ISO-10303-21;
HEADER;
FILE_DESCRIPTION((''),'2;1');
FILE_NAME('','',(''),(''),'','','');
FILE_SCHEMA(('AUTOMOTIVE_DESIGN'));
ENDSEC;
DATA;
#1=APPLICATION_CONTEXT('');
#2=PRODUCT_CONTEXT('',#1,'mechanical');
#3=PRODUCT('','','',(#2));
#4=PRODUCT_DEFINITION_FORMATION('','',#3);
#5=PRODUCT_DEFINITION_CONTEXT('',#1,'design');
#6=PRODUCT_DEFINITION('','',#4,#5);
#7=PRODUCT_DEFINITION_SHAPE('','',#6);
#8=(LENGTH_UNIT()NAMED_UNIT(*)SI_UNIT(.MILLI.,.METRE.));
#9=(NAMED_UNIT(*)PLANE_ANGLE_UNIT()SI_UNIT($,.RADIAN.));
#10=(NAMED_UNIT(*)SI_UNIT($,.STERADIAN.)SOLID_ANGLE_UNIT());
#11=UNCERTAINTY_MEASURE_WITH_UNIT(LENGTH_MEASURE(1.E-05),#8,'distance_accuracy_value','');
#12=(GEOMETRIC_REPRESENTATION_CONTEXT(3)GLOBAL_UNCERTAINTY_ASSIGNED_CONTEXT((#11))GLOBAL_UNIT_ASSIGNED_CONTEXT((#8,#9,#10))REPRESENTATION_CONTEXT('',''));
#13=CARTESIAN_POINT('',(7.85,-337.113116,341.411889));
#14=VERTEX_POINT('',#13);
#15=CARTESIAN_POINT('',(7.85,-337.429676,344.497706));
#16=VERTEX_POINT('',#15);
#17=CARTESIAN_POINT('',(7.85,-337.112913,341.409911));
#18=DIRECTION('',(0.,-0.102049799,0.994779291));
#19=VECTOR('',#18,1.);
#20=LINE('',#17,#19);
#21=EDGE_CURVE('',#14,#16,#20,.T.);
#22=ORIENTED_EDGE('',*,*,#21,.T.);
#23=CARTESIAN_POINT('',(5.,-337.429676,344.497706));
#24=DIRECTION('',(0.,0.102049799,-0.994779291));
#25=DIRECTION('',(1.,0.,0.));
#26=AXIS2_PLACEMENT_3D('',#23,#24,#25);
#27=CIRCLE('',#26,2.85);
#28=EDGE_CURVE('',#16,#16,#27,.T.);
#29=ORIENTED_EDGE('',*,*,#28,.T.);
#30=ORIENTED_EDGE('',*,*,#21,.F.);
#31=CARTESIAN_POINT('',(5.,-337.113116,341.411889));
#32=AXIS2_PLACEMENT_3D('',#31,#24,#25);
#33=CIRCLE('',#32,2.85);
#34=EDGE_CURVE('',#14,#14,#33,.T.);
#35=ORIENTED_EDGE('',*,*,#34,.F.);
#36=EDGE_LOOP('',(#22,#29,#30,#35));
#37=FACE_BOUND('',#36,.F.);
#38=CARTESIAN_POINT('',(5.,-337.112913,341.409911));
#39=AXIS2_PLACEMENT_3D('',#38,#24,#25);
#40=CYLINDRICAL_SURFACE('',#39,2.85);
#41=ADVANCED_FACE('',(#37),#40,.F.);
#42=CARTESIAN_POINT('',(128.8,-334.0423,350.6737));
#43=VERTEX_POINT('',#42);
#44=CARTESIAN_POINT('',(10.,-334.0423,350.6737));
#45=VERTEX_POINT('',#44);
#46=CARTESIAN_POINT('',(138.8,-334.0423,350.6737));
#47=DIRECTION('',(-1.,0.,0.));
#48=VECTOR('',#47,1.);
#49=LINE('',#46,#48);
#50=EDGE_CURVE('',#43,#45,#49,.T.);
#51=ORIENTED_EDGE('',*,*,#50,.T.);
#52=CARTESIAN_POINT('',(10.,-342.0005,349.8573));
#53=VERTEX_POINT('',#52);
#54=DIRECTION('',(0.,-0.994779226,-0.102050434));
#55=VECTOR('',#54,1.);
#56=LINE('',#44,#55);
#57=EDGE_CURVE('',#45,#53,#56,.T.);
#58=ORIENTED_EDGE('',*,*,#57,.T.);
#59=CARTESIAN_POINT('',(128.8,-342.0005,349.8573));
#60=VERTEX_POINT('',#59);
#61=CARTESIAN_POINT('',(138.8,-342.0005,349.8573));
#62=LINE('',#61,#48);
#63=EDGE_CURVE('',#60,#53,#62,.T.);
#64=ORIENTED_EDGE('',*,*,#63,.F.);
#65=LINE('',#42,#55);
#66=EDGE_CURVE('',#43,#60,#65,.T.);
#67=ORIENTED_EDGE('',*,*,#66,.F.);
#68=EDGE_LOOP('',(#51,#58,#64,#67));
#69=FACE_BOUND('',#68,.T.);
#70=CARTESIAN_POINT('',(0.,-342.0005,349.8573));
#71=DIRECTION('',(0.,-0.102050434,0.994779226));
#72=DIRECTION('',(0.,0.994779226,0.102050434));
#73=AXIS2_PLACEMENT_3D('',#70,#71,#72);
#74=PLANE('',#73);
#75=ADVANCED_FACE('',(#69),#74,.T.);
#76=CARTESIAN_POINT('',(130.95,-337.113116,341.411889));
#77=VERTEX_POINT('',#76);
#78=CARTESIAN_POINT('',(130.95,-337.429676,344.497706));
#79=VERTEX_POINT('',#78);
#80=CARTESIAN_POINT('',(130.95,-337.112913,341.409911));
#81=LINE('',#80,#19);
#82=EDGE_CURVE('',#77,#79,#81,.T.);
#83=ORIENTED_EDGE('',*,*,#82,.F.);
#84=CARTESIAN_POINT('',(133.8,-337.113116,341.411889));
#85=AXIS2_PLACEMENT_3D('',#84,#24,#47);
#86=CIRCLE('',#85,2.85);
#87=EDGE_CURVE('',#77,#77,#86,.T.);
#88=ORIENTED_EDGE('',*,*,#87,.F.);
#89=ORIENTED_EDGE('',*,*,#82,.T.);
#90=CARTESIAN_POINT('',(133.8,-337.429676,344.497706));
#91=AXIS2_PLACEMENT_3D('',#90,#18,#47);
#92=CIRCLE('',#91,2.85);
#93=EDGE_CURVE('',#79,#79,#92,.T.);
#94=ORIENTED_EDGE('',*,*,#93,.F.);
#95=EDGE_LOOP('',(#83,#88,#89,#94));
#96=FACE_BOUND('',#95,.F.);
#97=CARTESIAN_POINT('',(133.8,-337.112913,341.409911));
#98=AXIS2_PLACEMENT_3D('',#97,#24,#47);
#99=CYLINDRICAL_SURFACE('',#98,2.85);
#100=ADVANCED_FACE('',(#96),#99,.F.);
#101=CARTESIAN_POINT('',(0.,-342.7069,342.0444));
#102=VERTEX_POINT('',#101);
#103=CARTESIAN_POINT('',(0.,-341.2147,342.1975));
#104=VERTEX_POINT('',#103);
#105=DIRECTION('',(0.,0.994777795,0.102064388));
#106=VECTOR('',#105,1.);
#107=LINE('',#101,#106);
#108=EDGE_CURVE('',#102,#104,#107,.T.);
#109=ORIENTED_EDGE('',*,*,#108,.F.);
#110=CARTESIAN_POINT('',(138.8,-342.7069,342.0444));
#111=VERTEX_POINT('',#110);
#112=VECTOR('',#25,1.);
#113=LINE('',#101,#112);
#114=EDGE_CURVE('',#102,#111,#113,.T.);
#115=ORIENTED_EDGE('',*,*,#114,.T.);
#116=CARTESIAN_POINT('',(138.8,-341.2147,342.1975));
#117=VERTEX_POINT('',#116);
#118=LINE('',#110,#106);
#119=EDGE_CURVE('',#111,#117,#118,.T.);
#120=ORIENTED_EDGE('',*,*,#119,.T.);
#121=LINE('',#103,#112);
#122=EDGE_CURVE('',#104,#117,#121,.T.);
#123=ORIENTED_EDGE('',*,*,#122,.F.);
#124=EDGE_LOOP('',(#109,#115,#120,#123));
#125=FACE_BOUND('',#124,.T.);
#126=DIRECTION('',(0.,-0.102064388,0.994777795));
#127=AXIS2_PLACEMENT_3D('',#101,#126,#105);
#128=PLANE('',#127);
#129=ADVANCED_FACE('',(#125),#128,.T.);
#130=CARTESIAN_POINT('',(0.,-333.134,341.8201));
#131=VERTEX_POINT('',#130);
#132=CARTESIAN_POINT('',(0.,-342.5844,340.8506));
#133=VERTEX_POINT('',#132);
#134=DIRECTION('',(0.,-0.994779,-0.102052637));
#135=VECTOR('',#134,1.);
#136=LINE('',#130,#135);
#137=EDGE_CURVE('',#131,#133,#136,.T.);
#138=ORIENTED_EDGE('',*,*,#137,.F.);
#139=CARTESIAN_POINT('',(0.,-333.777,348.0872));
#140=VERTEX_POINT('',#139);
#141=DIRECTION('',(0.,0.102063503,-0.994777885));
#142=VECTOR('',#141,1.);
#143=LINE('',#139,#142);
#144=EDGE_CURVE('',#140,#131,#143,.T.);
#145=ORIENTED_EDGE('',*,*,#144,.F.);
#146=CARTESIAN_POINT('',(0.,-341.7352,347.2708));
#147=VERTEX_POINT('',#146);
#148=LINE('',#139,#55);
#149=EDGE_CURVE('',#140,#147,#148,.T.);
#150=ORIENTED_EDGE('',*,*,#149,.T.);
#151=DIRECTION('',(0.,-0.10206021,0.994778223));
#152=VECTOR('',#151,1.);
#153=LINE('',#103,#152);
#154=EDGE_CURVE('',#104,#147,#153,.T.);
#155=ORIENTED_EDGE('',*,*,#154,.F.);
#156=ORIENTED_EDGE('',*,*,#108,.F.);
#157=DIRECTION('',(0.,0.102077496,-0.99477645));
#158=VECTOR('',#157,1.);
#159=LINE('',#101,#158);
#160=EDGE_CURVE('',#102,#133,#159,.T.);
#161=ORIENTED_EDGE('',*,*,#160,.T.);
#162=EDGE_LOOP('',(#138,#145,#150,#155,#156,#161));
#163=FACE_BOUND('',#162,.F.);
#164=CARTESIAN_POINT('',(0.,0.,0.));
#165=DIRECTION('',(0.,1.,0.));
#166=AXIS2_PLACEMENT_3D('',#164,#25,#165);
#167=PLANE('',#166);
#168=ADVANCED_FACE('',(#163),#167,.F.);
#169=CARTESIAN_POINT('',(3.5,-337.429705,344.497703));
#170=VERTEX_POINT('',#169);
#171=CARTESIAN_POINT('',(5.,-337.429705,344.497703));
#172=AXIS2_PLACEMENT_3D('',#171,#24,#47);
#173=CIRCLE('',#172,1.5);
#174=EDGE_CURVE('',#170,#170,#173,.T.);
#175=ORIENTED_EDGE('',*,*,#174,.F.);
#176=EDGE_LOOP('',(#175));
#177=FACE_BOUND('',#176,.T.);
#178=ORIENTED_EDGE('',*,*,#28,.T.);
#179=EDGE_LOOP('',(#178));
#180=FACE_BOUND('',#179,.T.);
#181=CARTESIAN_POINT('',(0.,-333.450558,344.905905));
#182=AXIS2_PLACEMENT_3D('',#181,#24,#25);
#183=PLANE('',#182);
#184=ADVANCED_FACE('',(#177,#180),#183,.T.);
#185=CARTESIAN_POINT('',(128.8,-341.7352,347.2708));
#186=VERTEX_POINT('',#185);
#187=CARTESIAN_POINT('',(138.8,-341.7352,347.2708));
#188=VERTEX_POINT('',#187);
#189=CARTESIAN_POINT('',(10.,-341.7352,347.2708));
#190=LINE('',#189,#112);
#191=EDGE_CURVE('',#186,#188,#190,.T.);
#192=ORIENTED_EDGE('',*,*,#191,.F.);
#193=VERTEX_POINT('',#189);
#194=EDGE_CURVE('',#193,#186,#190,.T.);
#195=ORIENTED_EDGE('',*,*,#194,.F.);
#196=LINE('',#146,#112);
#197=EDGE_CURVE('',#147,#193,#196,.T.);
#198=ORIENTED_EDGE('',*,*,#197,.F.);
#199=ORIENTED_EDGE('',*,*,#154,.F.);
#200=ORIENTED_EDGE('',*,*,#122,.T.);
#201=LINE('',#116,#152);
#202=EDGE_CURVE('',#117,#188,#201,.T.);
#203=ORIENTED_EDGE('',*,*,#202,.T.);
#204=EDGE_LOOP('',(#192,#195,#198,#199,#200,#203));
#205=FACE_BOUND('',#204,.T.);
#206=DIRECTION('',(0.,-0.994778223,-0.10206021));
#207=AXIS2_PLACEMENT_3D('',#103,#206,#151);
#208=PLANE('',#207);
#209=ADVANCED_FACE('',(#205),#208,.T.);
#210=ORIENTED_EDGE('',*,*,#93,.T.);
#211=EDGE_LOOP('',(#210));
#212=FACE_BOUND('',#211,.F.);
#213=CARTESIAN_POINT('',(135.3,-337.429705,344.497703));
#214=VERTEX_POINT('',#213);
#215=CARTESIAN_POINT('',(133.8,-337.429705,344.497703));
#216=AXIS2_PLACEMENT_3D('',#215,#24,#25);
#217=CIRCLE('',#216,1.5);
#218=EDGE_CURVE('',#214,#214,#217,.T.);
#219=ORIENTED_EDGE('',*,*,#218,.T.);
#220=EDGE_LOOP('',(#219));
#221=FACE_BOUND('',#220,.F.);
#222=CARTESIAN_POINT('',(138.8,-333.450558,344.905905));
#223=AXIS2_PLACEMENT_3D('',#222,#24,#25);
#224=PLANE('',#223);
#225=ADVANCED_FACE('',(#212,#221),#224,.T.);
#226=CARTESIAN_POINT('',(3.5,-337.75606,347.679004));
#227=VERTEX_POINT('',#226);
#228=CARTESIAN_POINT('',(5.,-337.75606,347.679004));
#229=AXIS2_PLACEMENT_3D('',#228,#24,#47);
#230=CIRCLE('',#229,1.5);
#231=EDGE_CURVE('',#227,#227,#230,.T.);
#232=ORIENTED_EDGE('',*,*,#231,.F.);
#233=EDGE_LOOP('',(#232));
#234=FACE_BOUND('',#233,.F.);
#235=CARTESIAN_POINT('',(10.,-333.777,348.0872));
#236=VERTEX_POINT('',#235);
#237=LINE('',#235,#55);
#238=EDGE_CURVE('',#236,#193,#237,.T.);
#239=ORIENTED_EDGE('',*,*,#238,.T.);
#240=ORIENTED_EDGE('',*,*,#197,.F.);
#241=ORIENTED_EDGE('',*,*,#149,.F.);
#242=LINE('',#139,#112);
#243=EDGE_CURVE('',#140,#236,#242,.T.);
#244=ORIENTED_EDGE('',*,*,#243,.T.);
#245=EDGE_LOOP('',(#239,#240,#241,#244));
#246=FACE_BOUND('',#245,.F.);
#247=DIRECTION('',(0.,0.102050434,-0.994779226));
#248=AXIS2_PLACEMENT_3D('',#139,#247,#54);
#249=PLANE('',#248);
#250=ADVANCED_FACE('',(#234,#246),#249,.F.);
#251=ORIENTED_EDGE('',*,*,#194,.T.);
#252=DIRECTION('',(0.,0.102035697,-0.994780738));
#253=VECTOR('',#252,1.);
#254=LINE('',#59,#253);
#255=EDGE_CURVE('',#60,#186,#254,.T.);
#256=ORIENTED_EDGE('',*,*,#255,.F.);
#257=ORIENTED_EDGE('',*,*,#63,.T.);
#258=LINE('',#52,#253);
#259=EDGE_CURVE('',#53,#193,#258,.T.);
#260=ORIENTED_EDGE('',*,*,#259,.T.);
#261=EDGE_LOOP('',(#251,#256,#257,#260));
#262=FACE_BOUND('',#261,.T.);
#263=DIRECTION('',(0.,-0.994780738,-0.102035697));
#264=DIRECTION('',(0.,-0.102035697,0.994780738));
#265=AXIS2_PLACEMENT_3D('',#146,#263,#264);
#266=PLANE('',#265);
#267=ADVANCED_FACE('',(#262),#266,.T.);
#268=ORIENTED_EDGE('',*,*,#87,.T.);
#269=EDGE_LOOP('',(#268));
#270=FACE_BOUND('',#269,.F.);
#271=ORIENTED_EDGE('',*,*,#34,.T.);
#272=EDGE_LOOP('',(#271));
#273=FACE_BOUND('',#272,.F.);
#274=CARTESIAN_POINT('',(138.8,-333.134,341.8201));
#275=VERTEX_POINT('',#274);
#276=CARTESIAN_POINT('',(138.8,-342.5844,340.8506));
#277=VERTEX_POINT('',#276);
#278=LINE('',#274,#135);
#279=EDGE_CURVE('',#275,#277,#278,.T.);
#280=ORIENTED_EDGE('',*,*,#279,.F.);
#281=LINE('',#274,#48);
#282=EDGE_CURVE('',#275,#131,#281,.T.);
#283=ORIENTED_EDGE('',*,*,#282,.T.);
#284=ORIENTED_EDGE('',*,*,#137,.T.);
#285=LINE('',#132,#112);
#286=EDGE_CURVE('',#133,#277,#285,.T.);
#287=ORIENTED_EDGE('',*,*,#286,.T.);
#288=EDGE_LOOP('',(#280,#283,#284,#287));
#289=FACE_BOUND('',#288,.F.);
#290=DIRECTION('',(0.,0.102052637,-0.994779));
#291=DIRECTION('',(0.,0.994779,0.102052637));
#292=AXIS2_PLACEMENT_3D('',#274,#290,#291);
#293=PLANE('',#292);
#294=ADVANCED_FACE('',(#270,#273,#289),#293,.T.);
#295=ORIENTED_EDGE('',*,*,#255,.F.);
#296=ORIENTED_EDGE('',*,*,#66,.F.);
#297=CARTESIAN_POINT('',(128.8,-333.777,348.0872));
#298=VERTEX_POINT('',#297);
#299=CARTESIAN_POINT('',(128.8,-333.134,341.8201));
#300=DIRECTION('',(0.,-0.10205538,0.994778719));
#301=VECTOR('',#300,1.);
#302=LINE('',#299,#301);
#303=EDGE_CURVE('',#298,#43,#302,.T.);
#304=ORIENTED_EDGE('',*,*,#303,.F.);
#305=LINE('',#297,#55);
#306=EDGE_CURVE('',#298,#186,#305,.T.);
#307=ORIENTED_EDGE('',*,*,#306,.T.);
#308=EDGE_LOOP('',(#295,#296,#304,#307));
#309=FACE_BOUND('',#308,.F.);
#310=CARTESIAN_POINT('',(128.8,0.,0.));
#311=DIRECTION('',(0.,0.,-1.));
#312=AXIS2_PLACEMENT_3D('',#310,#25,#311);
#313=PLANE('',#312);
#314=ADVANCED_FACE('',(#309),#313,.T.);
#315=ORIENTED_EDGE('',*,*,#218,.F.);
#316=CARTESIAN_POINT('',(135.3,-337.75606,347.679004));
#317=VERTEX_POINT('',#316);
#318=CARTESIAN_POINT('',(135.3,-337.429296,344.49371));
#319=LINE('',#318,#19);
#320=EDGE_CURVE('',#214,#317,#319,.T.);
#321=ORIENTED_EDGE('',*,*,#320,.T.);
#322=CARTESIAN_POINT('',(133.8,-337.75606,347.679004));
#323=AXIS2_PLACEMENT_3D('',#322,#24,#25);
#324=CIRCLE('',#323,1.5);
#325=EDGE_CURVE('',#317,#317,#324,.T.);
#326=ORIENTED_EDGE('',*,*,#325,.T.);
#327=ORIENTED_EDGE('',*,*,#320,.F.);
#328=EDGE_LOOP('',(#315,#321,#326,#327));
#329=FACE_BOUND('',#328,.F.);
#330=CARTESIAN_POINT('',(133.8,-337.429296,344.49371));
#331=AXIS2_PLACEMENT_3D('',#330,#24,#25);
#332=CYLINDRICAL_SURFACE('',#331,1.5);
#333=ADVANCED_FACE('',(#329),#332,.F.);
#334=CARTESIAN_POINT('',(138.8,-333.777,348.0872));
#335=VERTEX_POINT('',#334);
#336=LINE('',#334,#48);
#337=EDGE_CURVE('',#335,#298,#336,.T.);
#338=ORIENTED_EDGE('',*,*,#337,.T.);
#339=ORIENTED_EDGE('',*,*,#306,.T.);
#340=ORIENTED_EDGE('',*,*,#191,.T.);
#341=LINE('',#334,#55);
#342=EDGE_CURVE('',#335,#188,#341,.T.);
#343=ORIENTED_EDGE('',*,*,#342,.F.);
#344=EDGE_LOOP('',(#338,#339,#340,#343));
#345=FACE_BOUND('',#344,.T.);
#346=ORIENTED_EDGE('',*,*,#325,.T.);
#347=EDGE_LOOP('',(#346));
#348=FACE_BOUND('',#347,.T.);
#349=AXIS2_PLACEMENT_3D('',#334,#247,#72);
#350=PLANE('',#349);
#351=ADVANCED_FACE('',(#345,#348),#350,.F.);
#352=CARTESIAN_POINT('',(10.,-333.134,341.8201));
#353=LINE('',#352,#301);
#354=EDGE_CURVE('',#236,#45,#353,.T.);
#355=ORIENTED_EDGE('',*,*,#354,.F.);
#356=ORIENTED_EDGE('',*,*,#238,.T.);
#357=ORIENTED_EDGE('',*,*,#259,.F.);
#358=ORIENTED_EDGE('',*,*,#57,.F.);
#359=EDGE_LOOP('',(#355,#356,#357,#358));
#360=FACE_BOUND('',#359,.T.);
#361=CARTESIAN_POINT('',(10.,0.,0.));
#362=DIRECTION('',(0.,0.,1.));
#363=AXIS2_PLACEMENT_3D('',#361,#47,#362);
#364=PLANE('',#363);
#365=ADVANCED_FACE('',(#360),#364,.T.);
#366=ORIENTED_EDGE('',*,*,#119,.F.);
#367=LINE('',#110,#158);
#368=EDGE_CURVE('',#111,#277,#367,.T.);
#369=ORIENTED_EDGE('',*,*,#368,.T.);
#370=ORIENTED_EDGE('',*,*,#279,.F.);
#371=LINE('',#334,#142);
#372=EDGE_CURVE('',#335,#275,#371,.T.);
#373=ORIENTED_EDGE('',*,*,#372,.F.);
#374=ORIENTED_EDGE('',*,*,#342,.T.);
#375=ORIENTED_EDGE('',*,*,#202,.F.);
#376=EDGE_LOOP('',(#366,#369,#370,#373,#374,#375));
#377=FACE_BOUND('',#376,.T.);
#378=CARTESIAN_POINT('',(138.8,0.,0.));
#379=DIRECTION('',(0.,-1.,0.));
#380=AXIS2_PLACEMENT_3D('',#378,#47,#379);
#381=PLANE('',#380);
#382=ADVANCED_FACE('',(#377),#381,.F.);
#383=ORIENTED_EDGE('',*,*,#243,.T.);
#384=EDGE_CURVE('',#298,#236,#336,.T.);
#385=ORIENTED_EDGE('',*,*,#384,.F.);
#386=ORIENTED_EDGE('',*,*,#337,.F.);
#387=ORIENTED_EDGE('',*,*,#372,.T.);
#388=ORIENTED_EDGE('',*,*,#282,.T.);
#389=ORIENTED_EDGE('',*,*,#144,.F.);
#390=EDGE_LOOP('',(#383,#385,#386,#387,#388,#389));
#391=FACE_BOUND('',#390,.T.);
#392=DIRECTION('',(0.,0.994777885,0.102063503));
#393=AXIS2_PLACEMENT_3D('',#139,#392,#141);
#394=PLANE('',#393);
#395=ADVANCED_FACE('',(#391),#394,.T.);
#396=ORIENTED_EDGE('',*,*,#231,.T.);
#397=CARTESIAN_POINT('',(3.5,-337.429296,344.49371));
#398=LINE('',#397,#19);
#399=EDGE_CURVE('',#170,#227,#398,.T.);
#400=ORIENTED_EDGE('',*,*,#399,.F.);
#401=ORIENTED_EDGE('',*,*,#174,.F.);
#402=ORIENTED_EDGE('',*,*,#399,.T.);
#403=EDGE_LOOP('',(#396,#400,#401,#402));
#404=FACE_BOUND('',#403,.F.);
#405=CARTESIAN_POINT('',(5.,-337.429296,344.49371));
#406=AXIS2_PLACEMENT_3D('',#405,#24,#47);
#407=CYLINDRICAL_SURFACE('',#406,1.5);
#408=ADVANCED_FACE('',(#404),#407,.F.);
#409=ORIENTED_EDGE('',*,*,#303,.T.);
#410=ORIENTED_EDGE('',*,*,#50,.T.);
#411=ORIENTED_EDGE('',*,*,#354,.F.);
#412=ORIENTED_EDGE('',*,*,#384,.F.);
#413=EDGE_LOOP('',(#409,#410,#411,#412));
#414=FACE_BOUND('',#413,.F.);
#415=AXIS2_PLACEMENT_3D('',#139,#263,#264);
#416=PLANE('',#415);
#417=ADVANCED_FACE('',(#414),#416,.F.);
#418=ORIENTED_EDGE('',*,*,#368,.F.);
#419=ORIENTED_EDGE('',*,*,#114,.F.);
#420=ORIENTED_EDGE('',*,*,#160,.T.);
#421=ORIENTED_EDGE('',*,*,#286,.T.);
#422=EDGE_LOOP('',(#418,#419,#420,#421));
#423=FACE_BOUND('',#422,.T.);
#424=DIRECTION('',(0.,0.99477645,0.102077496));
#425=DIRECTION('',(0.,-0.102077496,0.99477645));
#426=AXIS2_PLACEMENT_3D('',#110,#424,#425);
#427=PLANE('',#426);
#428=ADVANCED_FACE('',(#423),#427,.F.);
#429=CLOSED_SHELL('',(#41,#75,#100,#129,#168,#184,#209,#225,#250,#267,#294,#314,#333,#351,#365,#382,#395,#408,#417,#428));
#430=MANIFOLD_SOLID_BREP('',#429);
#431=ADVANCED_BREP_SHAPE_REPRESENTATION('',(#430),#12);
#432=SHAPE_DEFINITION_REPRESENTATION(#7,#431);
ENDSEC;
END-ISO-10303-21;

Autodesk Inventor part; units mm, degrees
ref_plane "YZ Plane" through (0, 0, 0) normal (1, 0, 0) x (0, 1, 0)
ref_plane "XZ Plane" through (0, 0, 0) normal (0, 1, 0) x (-1, 0, 0)
ref_plane "XY Plane" through (0, 0, 0) normal (0, 0, 1) x (1, 0, 0)
sketch "Skizze2" plane through (0, 0, 0) normal (1, 0, 0) x (0, 1, 0)
  line L0 (-333.777, 348.0872) -> (-334.0423, 350.6737)
  line L1 (-333.777, 348.0872) -> (-333.134, 341.8201)
  line L2 (-333.134, 341.8201) -> (-342.5844, 340.8506)
  line L3 (-342.0005, 349.8573) -> (-334.0423, 350.6737)
  line L4 (-342.7069, 342.0444) -> (-341.2147, 342.1975)
  line L5 (-342.7069, 342.0444) -> (-342.5844, 340.8506)
  line L6 (-333.134, 341.8201) -> (-342.5844, 340.8506)
  line L7 (-333.777, 348.0872) -> (-333.134, 341.8201)
  line L8 (-333.777, 348.0872) -> (-341.7352, 347.2708)
  line L9 (-341.2147, 342.1975) -> (-341.7352, 347.2708)
  line L10 (-342.7069, 342.0444) -> (-342.5844, 340.8506)
  line L11 (-341.7352, 347.2708) -> (-342.0005, 349.8573)
  point P0 (0, 0)
extrude "Extrusion1" add sketch "Skizze2" along normal blind 69.4
sketch "Skizze3" plane through (0, 0, 0) normal (-1, 0, 0) x (0, 0, 1)
  line L0 (342.0444, -342.7069) -> (342.1975, -341.2147) projected
  line L1 (342.0444, -342.7069) -> (340.8506, -342.5844) projected
  line L2 (341.8201, -333.134) -> (340.8506, -342.5844) projected
  line L3 (348.0872, -333.777) -> (341.8201, -333.134) projected
  line L4 (348.0872, -333.777) -> (347.2708, -341.7352) projected
  line L5 (342.1975, -341.2147) -> (347.2708, -341.7352) projected
  line L6 (350.6737, -334.0423) -> (349.8573, -342.0005) projected
  line L7 (349.8573, -342.0005) -> (347.2708, -341.7352)
  line L8 (349.8573, -342.0005) -> (342.1975, -341.2147) projected
  line L9 (341.8201, -333.134) -> (350.6737, -334.0423) projected
  line L10 (350.6737, -334.0423) -> (348.0872, -333.777)
  point P0 (0, 0)
extrude "Extrusion2" cut sketch "Skizze3" against normal blind 10 contours L4 L9 L6 L7
sketch "Skizze4" plane through (0, -333.134, 341.8201) normal (0, 0.1020498, -0.9947793) x (1, 0, 0)
  line L0 (5, 0) -> (5, 9.5) construction
  line L1 (0, 9.5) -> (69.4, 9.5) construction
  circle A0 centre (5, 4) radius 2.85
  circle A1 centre (5, 4) radius 1.5 construction
  point P0 (0, -296.5122)
  dimension "d4" = 5.7
extrude "Extrusion3" cut sketch "Skizze4" against normal blind 3.1
sketch "Skizze5" plane through (5, -337.4295, 344.4957) normal (0, 0.1020498, -0.9947793) x (-1, 0, 0)
  circle A0 centre (0, 0) radius 2.85 projected
  circle A1 centre (0, 0) radius 1.5
  point P0 (5, 300.5122)
  dimension "d9" = 3
extrude "Extrusion4" cut sketch "Skizze5" against normal blind 3.4 contours A1
mirror "Spiegeln1" about plane through (69.4, -337.8887, 348.9722) normal (1, 0, 0) of "Extrusion4", "Extrusion3", "Extrusion2", "Extrusion1"
properties part number "Case_bottom_front"
